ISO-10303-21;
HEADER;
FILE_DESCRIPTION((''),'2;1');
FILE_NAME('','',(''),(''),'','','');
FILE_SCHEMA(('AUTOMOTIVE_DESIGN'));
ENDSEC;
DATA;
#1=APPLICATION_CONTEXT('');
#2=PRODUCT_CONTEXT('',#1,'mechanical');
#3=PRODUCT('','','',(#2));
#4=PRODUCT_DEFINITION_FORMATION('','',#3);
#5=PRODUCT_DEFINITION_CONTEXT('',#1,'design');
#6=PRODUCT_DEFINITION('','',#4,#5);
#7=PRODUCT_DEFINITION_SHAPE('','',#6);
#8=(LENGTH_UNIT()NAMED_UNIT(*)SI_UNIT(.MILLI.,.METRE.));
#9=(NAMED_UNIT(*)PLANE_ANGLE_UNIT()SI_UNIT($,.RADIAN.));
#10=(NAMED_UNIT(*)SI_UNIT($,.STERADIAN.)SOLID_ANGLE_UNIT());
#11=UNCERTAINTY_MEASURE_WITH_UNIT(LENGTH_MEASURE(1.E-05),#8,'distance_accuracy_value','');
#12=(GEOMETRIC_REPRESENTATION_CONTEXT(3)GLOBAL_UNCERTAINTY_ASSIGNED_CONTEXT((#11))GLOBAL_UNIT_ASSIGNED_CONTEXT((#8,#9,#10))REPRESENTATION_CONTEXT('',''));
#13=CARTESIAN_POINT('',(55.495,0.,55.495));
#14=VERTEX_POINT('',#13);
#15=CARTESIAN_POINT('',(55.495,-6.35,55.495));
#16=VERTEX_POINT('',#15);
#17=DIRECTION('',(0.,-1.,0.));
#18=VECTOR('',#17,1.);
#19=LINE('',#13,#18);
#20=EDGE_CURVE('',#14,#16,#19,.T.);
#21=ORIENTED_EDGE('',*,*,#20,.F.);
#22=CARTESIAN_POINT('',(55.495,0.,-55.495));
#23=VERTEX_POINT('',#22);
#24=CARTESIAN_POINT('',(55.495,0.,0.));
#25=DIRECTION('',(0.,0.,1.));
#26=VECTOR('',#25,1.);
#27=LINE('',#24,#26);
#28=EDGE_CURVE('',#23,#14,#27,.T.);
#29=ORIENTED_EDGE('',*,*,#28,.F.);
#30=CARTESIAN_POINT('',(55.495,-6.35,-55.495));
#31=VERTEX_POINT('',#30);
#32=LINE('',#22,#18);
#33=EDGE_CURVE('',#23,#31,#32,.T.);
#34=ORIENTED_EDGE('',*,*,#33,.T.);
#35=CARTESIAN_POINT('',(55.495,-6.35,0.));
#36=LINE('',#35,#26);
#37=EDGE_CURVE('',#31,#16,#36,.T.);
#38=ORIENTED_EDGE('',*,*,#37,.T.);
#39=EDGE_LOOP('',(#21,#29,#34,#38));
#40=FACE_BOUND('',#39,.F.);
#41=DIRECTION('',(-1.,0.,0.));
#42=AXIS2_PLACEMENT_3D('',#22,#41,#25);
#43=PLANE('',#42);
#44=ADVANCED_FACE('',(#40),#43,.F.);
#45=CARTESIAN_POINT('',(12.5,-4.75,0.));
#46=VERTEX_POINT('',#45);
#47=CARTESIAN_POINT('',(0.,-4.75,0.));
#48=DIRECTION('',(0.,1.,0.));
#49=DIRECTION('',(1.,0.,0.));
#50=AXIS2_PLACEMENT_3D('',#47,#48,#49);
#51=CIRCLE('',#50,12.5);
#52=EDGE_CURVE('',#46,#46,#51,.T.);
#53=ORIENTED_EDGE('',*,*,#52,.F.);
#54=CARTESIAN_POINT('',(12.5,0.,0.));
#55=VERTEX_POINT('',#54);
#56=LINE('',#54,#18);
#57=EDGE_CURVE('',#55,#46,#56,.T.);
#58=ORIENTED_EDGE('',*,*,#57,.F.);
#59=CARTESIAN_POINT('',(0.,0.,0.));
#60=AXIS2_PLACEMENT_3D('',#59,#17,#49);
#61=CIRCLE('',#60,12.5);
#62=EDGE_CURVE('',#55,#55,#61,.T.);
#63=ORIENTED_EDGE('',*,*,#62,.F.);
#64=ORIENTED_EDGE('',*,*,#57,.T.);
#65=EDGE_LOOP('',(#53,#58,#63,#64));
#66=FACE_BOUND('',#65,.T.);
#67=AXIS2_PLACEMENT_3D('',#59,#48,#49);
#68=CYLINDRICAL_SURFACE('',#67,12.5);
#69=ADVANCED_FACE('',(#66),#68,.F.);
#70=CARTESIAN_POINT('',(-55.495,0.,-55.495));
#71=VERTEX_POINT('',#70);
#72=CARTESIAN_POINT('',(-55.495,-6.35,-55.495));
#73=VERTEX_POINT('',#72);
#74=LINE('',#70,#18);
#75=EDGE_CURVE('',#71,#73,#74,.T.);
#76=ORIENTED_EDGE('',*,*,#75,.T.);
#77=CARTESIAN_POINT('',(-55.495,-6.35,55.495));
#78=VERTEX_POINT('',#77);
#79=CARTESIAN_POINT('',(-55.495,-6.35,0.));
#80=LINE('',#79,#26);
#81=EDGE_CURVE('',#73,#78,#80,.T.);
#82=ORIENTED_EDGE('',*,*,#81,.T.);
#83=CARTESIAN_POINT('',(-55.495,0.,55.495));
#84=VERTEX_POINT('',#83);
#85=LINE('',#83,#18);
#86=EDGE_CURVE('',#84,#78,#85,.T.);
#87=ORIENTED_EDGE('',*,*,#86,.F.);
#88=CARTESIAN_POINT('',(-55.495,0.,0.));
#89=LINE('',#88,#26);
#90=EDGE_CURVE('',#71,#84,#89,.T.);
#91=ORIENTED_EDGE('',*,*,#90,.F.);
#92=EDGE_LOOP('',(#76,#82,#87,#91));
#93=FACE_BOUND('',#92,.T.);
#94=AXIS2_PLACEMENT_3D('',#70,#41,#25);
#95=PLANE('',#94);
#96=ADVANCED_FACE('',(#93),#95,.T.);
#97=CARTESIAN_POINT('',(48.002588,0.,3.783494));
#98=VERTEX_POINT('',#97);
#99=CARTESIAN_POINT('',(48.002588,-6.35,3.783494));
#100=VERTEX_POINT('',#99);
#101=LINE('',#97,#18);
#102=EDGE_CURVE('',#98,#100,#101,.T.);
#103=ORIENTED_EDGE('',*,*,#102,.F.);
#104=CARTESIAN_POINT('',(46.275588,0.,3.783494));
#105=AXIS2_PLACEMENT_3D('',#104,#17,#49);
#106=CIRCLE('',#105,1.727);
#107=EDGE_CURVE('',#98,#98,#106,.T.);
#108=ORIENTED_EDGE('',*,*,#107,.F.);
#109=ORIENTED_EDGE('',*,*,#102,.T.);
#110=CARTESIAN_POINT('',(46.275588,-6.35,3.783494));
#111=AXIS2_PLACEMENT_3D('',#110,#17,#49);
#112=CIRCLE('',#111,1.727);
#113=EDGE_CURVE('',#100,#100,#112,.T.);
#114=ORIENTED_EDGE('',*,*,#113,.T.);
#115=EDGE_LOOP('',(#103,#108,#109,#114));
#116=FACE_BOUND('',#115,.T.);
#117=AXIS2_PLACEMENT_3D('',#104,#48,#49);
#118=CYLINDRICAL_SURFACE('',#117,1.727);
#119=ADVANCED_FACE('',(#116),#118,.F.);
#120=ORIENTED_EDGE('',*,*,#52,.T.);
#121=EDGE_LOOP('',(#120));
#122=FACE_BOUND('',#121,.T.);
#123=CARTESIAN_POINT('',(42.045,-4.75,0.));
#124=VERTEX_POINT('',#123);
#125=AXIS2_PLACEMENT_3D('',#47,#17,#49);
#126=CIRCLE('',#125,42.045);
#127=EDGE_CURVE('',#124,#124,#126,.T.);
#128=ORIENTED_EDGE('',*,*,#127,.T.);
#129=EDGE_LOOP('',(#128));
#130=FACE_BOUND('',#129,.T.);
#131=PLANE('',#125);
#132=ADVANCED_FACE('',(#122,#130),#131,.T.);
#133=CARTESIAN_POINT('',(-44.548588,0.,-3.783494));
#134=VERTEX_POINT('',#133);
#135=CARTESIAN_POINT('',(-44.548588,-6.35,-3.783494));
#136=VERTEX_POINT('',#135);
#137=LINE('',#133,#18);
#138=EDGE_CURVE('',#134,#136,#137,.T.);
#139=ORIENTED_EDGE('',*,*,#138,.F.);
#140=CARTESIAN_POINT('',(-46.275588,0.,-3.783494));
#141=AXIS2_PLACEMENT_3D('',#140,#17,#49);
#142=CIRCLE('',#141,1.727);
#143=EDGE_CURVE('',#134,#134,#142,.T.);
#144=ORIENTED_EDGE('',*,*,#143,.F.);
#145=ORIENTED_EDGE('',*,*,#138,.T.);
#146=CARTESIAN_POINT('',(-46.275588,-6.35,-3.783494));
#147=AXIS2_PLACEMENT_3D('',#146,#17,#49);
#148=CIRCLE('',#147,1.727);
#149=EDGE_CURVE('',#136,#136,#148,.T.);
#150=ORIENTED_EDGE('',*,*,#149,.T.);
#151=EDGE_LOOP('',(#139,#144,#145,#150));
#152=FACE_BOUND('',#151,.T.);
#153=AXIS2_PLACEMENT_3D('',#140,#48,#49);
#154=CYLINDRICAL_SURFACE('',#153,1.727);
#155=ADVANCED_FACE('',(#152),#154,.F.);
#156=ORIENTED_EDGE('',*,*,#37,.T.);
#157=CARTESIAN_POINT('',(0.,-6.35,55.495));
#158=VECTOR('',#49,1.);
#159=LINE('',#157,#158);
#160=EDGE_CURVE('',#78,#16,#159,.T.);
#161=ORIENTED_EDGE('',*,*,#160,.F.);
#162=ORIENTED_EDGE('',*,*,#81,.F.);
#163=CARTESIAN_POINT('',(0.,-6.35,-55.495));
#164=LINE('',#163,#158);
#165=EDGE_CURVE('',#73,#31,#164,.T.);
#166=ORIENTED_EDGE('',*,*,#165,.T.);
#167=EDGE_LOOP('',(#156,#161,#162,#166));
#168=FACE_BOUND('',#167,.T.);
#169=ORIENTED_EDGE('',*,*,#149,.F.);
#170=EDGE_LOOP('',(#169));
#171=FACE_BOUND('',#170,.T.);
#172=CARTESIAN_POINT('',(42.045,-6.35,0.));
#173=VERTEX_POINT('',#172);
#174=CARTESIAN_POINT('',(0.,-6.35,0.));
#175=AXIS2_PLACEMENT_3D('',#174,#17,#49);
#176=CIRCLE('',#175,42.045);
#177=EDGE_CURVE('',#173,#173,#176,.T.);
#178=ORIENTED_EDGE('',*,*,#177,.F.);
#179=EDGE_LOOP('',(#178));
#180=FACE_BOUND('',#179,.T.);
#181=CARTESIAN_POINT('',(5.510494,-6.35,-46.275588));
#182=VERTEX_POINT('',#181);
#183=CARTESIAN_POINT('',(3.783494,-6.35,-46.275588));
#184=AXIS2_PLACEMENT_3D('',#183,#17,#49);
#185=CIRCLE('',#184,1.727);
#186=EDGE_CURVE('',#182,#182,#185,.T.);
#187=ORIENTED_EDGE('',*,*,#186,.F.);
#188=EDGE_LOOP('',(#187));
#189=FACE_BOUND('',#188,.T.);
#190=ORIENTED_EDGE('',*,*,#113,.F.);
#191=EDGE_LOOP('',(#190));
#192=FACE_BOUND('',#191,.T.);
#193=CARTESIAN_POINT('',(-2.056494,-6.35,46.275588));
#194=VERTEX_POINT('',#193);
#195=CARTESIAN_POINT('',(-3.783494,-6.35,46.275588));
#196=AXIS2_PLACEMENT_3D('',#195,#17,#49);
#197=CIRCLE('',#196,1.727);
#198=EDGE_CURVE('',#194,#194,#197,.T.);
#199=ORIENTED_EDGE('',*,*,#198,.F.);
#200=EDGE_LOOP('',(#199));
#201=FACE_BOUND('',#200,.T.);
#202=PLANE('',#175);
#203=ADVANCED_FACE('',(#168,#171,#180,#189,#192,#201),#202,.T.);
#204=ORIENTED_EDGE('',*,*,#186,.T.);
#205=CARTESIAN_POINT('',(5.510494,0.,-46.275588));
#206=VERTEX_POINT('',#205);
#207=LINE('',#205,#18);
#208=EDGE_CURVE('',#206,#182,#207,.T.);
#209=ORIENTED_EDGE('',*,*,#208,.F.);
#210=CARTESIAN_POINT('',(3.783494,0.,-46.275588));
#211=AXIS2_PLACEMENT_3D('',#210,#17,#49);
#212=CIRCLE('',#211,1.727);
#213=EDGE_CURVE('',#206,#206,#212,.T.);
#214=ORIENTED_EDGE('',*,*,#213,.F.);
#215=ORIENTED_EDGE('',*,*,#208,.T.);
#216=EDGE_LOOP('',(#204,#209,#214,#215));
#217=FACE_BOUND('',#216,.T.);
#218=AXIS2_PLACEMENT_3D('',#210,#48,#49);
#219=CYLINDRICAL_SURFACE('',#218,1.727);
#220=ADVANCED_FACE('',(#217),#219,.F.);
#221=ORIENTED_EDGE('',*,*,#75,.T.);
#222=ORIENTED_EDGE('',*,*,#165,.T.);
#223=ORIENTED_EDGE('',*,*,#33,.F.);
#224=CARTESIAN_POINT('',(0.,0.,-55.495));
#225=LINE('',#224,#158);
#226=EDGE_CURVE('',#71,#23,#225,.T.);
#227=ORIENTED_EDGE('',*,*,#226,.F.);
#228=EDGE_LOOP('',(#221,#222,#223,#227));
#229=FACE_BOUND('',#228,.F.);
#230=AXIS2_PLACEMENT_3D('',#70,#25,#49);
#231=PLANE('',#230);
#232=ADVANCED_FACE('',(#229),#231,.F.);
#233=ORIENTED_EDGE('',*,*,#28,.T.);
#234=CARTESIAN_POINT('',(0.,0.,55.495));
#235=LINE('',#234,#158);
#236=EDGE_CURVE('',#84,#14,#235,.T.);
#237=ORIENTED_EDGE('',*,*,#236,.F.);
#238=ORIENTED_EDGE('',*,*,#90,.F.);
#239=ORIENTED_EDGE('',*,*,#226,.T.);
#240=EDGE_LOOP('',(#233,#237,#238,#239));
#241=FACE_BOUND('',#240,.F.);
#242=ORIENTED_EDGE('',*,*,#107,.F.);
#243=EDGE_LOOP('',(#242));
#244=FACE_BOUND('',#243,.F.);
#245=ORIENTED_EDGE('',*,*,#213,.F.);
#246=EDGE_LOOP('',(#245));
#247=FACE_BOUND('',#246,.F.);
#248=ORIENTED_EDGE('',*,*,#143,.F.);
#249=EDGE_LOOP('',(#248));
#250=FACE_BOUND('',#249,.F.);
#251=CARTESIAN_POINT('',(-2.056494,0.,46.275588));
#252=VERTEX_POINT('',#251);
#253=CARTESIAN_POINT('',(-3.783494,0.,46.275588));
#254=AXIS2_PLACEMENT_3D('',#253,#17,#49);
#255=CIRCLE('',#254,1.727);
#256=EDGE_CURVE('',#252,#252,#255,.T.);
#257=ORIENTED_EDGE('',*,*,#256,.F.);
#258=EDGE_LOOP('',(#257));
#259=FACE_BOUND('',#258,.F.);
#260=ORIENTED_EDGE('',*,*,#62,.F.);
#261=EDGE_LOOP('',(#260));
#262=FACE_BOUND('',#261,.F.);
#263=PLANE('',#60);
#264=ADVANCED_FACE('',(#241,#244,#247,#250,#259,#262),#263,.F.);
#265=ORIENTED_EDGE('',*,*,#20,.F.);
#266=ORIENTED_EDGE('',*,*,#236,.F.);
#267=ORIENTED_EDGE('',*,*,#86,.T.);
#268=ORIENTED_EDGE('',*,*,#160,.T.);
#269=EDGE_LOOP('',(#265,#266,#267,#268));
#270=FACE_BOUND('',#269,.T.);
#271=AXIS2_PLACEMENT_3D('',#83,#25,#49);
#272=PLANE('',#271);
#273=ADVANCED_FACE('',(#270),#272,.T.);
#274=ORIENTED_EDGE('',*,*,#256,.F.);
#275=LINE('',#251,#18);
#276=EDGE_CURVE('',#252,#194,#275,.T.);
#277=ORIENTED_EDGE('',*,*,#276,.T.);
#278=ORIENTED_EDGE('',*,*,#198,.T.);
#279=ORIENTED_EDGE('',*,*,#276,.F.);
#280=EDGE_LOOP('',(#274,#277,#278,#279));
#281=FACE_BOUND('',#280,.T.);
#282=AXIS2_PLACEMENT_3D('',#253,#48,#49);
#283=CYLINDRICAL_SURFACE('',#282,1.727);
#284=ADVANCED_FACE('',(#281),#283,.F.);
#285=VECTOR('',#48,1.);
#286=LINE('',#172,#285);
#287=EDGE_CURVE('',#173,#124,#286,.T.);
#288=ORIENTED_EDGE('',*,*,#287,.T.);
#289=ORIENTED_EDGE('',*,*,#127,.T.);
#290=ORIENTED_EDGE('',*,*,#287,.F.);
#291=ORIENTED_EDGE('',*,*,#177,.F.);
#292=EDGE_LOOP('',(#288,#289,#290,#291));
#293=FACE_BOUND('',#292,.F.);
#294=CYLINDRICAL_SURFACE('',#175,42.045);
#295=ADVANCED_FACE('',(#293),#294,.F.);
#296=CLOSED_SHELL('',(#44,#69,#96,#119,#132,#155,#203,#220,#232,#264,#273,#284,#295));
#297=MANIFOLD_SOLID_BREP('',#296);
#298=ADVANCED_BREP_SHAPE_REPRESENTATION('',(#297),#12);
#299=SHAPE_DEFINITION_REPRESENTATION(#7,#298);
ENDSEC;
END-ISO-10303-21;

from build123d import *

# Parameters (mm, degrees)
F0_W     = 110.99
F0_H     = 110.99
F0_R     = 1.727
F0_R_2   = 12.5
F1_DEPTH = 6.35
F2_R     = 42.045
F3_DEPTH = 1.6


# Not quite as in the source:
# - a feature names something its author has since deleted; it is built from what else it names


with BuildPart() as f1:
    # F0 (on Front) → F1 (new body)
    with BuildSketch(Plane.XZ):
        Rectangle(F0_W, F0_H)
        with Locations((-46.2755883255, -3.7834937726)):
            Circle(F0_R, mode=Mode.SUBTRACT)
        with Locations((3.7834937726, -46.2755883255)):
            Circle(F0_R, mode=Mode.SUBTRACT)
        with Locations((-3.7834937726, 46.2755883255)):
            Circle(F0_R, mode=Mode.SUBTRACT)
        Circle(F0_R_2, mode=Mode.SUBTRACT)
        with Locations((46.2755883255, 3.7834937726)):
            Circle(F0_R, mode=Mode.SUBTRACT)
    extrude(amount=F1_DEPTH)

    # F2 (on face) → F3 (cut)
    with BuildSketch(Plane.XZ.offset(6.35)):
        Circle(F2_R)
    extrude(amount=-F3_DEPTH, mode=Mode.SUBTRACT)


solid = f1.part
